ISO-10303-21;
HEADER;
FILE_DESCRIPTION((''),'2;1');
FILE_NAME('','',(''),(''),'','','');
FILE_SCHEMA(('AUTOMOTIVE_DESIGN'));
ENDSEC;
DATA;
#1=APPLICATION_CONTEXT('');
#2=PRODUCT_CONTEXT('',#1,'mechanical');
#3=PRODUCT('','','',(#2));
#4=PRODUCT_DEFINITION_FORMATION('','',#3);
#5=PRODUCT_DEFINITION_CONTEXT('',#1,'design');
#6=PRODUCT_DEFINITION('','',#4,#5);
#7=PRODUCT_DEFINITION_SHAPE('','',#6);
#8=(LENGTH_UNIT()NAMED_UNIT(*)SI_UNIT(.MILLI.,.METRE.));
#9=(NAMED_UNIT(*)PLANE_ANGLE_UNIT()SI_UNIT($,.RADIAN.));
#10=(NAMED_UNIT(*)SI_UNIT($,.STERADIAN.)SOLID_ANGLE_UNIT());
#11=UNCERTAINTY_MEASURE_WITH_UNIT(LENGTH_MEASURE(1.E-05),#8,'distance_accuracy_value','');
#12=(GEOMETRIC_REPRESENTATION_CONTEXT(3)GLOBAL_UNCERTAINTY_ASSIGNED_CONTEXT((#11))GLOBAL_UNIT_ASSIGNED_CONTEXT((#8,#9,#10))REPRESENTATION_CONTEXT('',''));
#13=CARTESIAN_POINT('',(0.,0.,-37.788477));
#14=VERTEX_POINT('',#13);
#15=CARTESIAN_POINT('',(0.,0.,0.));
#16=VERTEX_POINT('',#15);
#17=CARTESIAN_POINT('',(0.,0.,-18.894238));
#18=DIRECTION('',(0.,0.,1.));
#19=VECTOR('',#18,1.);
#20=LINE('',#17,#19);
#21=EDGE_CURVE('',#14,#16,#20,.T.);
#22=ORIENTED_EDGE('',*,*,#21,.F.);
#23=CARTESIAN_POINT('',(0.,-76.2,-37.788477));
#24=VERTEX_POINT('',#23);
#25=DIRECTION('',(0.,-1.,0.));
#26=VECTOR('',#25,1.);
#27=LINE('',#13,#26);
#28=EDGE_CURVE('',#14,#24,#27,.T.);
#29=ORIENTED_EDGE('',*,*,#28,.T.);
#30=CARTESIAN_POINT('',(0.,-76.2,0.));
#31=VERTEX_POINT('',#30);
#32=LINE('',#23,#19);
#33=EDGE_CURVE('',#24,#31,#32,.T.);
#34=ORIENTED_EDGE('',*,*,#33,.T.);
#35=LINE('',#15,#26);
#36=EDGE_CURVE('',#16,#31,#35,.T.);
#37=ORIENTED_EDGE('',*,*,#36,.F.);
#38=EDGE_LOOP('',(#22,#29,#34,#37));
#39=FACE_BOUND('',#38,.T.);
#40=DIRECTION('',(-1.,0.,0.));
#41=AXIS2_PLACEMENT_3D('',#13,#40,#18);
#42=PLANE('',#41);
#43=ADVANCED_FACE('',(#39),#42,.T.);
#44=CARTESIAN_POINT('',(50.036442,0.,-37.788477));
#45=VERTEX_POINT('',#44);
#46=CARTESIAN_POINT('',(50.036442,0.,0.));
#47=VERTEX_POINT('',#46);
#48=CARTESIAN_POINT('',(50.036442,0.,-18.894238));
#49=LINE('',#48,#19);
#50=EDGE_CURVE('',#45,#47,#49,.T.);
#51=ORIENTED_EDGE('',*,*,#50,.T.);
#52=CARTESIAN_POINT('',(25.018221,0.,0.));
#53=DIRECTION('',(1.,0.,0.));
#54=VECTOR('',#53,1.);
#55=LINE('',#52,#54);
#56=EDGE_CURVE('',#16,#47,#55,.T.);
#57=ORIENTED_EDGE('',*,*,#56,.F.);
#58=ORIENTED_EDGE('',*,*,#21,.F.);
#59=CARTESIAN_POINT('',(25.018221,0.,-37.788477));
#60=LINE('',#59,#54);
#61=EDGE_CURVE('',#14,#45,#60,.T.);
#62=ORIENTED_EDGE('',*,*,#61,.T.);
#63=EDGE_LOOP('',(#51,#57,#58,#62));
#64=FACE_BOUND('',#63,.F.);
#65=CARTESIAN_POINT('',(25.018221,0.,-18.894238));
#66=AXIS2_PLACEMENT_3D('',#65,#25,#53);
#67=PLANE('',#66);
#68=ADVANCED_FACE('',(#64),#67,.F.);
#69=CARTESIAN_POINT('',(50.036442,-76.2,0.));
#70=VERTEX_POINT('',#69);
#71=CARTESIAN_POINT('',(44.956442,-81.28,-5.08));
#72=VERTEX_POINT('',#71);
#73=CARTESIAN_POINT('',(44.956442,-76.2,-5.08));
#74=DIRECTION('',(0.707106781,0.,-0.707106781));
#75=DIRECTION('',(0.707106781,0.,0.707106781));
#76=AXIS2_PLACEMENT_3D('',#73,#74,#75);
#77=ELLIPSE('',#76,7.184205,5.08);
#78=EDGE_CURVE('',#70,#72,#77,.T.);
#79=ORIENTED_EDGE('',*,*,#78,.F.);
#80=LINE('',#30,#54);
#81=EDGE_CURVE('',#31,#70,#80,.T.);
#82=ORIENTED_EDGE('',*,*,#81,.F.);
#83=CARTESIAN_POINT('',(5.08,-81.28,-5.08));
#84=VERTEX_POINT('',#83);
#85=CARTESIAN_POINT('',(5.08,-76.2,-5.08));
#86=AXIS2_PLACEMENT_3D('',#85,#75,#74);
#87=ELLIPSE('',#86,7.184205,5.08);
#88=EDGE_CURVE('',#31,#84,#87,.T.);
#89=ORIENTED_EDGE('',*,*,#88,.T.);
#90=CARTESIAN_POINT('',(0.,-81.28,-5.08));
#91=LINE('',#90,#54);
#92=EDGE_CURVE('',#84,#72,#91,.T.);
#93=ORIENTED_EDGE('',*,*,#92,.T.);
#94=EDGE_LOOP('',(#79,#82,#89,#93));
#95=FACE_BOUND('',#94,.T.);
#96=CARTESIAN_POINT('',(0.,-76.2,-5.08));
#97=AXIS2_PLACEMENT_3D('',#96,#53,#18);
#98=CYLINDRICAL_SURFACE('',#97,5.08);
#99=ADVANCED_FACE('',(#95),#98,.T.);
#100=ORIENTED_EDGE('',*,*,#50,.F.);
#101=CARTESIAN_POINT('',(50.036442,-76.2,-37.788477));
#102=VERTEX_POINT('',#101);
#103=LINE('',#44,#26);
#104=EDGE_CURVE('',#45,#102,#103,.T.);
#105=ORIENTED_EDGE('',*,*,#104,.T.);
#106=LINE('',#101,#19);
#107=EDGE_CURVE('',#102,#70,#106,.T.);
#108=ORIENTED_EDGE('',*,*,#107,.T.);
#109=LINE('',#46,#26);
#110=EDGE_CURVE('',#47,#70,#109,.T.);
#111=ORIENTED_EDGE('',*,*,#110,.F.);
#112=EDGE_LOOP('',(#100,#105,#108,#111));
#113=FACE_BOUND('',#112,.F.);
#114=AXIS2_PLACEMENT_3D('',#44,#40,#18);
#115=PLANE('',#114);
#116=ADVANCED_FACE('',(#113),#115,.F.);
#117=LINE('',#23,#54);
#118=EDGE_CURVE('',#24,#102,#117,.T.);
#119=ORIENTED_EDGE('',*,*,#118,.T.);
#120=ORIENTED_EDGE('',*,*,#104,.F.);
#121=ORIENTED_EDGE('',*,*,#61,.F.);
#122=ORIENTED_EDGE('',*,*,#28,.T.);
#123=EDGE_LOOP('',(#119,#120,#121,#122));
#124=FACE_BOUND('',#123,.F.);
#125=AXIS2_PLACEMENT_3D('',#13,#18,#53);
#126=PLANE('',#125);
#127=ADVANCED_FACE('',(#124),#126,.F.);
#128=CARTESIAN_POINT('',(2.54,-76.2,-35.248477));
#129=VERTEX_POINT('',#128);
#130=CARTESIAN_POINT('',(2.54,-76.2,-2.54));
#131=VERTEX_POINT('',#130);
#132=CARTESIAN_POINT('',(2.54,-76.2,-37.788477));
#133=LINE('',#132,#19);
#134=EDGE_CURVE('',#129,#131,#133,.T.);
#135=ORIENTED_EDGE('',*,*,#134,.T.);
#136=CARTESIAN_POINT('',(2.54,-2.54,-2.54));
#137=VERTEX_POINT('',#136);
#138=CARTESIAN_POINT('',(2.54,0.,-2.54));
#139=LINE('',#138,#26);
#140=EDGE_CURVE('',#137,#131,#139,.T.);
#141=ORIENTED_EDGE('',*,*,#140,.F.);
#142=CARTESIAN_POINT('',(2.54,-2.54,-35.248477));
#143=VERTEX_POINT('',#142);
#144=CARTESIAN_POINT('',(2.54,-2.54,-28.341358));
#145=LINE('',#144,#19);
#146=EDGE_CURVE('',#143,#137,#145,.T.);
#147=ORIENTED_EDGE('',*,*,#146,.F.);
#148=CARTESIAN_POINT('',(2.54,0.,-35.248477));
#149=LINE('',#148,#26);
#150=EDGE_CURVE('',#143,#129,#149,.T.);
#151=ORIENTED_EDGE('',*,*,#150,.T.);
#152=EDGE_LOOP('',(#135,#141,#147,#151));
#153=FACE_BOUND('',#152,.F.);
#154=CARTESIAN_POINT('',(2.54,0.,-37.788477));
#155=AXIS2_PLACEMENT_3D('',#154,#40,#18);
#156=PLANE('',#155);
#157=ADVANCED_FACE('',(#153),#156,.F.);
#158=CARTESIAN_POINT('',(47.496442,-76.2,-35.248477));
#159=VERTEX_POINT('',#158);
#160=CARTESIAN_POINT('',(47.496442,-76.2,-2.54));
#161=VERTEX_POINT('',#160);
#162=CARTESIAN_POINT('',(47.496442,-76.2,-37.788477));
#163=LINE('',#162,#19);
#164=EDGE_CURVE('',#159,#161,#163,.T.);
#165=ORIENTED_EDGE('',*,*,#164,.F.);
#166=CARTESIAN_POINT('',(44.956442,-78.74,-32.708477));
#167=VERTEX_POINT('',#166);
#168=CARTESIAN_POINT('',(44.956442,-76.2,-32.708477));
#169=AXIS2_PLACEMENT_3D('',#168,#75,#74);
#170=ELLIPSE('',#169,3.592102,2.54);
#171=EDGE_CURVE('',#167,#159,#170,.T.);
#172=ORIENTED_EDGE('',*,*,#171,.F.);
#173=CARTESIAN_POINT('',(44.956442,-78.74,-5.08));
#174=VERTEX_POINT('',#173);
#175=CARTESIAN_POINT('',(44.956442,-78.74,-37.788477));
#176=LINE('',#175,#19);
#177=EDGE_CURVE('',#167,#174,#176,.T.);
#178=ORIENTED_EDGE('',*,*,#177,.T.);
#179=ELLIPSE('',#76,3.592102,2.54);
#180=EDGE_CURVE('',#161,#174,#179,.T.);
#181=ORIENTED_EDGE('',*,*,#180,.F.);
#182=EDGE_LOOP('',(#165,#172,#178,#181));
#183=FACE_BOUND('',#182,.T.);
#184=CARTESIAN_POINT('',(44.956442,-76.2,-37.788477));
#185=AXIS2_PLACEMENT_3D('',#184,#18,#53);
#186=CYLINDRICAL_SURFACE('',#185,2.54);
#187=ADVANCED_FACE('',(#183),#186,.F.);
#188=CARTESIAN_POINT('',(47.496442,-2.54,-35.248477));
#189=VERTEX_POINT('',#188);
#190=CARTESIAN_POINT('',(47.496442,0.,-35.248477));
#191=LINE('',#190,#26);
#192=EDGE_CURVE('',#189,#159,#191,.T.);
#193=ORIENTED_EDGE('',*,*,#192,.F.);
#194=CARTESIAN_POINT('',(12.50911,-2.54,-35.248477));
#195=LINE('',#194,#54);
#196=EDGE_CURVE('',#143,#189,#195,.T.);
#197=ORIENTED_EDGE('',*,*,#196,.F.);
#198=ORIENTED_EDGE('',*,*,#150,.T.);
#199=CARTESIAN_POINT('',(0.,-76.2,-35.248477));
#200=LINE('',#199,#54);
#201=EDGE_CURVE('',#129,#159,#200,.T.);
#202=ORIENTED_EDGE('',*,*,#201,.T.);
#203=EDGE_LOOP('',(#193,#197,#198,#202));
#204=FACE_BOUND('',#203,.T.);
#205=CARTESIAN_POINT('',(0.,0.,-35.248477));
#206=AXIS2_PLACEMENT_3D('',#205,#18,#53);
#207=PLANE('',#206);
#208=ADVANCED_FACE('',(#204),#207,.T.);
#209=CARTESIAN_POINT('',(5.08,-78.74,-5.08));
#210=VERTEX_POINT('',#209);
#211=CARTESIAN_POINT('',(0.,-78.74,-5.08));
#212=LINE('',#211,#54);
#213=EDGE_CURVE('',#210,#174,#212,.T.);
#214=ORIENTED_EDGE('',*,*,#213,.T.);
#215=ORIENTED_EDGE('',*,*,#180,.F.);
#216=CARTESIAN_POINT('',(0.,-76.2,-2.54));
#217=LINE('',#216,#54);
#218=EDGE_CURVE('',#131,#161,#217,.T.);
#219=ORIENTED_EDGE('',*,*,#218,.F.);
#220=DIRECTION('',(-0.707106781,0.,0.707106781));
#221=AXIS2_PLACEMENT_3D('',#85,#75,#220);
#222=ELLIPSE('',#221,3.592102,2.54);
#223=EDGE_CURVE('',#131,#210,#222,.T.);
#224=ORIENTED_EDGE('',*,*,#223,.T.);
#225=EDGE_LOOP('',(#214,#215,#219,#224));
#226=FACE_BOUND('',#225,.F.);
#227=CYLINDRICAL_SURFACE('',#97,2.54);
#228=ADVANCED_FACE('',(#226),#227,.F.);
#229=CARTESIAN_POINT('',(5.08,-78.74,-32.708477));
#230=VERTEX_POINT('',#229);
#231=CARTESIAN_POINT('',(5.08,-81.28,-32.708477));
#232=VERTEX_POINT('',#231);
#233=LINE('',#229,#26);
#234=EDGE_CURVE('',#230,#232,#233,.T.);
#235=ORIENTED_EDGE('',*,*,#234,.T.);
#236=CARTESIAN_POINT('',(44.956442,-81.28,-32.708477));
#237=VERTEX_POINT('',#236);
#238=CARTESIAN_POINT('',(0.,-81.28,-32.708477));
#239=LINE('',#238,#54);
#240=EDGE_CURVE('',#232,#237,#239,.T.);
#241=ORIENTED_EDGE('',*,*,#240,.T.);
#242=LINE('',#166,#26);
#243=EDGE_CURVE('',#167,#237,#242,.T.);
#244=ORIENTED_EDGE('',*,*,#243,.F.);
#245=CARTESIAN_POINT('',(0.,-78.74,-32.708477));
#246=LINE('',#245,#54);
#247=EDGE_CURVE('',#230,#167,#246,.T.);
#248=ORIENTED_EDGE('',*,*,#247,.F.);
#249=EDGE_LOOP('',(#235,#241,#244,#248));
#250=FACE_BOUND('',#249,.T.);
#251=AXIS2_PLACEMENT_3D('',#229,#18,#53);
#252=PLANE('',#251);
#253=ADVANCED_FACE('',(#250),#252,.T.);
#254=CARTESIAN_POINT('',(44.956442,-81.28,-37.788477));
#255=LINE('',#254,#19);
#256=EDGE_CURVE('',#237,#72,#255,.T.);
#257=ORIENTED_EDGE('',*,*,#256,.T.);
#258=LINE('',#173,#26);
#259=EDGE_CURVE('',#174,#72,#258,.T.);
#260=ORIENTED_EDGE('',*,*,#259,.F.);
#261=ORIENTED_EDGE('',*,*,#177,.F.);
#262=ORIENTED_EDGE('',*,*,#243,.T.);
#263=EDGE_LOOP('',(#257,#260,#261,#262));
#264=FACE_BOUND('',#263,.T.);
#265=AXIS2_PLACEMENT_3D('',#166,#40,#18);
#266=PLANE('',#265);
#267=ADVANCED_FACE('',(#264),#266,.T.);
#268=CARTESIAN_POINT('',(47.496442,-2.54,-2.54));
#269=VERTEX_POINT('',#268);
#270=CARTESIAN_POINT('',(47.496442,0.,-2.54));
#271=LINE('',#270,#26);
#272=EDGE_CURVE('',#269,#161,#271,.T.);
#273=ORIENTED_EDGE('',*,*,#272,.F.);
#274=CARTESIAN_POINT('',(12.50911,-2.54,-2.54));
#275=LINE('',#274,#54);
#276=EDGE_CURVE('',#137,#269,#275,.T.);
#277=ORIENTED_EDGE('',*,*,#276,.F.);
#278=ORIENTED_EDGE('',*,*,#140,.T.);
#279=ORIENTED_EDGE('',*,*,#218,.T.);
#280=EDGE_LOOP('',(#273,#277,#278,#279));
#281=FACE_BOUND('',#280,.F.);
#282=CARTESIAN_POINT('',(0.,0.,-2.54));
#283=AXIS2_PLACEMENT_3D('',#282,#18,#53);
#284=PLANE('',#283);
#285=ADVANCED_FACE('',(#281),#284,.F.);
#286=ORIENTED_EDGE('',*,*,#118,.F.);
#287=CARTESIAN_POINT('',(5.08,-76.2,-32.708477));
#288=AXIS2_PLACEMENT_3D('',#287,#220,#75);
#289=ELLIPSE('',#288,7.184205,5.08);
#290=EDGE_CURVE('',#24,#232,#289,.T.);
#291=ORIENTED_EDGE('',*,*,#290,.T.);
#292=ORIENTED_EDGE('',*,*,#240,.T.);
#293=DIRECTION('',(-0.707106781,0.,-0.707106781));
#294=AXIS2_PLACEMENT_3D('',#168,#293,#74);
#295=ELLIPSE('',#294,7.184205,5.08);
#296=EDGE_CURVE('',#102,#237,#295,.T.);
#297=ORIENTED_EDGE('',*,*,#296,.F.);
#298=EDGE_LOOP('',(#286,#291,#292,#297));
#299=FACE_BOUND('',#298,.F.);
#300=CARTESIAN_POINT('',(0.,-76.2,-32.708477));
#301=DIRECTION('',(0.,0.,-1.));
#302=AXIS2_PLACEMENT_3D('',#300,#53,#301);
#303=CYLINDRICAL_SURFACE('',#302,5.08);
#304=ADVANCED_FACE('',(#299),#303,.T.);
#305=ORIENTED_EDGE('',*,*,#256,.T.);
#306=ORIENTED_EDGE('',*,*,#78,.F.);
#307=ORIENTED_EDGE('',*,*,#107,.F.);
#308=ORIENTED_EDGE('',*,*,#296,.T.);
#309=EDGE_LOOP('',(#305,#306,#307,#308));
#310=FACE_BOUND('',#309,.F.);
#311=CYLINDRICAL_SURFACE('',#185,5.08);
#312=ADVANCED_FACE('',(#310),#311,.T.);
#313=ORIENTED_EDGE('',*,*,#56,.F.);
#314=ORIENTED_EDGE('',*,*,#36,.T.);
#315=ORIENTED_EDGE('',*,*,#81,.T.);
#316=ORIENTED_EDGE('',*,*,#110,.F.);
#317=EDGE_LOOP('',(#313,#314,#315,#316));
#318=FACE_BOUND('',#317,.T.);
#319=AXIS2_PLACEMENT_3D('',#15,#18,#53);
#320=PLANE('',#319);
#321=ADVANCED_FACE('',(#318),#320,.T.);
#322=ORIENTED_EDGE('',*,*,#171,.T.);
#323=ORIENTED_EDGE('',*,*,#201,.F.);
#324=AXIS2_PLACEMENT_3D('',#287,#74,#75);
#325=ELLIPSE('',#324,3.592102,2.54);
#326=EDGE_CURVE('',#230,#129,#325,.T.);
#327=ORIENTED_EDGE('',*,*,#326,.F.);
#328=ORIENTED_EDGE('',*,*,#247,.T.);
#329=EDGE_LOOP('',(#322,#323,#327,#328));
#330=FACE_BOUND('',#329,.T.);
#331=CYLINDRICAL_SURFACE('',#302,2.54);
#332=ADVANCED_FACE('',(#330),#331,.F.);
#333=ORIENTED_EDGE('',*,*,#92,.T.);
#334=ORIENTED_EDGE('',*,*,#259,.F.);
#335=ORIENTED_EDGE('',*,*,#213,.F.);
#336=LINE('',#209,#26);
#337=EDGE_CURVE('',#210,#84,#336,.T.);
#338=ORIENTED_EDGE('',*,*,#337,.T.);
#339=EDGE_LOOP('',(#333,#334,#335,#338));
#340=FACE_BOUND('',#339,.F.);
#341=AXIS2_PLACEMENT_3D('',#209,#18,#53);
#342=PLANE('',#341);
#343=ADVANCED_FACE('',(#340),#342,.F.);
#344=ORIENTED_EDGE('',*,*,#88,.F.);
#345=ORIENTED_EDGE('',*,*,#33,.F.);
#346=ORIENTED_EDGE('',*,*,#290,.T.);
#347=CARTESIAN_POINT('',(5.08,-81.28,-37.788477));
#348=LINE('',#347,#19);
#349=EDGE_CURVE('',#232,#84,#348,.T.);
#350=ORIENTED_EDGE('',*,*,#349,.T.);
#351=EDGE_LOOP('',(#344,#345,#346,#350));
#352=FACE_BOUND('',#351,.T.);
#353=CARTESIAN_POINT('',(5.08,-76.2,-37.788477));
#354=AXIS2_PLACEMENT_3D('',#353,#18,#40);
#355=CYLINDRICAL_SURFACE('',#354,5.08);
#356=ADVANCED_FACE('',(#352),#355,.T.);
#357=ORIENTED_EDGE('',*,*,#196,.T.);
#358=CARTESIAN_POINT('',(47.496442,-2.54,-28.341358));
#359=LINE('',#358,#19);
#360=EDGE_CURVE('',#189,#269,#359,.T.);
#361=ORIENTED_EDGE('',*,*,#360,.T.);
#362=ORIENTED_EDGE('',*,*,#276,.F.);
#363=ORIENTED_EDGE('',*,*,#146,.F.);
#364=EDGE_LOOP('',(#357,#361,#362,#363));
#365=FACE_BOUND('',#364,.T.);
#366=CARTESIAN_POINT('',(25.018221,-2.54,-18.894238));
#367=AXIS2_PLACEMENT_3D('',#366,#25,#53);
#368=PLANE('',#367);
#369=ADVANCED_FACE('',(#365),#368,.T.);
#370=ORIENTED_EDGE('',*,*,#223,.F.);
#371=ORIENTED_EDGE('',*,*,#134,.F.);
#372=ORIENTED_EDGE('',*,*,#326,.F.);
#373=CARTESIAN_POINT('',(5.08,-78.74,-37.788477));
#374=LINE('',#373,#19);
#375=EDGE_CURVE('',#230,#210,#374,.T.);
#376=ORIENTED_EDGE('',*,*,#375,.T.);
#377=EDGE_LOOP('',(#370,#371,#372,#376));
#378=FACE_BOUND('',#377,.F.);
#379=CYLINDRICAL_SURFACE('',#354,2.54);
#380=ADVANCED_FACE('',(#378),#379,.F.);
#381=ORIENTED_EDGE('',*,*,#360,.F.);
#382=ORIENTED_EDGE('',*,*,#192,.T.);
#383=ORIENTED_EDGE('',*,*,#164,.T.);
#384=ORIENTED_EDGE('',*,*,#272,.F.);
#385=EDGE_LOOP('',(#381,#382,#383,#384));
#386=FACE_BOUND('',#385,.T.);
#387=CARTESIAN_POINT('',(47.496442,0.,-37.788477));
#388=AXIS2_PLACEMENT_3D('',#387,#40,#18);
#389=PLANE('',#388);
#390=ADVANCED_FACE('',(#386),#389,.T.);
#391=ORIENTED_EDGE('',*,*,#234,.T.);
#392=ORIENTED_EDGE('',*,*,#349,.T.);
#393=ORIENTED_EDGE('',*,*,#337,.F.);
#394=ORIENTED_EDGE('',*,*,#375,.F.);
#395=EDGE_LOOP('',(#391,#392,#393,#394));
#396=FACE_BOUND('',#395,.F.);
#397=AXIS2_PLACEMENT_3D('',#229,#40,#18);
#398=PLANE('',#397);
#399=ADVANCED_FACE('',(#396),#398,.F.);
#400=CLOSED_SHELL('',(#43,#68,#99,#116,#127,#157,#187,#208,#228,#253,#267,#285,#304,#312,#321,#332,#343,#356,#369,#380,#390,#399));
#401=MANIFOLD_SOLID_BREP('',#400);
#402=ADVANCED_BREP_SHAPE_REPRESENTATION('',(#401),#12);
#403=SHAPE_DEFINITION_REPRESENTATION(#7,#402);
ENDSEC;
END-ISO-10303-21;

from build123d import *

# Parameters (mm, degrees)
F0_W     = 50.0364415348
F0_H     = 37.788476795
F1_DEPTH = 81.28
F2_R     = 5.08
F3_T     = -2.54


# Not quite as in the source:
# - a shell that OpenCascade refuses in one call is made with other operations: the cavity is built on its own and cut out


with BuildPart() as f1:
    # F0 (on Front) → F1 (new body)
    with BuildSketch(Plane.XZ):
        with Locations((25.0182207674, -18.8942383975)):
            Rectangle(F0_W, F0_H)
    extrude(amount=F1_DEPTH)

    # F2
    f2_edges = [f1.edges().sort_by_distance(p)[0] for p in [
        (25.018221, -81.28, 0),
        (0, -81.28, -18.894238),
        (25.018221, -81.28, -37.788477),
        (50.036442, -81.28, -18.894238),
    ]]
    fillet(f2_edges, radius=F2_R)

    # F3: a shell. OpenCascade refuses it in one call, so the cavity is built on its own and cut out:
    # the body offset inwards by the wall thickness, plus a prism from it out through each open face.
    f3_core = offset(f1.part, amount=F3_T, mode=Mode.PRIVATE)
    f3_exits = [f3_core.faces().sort_by_distance(p)[0] for p in [
        (25.018221, -78.74, -18.894238),
    ]]
    add(f3_core, mode=Mode.SUBTRACT)
    extrude(f3_exits, amount=-F3_T, mode=Mode.SUBTRACT)


solid = f1.part
